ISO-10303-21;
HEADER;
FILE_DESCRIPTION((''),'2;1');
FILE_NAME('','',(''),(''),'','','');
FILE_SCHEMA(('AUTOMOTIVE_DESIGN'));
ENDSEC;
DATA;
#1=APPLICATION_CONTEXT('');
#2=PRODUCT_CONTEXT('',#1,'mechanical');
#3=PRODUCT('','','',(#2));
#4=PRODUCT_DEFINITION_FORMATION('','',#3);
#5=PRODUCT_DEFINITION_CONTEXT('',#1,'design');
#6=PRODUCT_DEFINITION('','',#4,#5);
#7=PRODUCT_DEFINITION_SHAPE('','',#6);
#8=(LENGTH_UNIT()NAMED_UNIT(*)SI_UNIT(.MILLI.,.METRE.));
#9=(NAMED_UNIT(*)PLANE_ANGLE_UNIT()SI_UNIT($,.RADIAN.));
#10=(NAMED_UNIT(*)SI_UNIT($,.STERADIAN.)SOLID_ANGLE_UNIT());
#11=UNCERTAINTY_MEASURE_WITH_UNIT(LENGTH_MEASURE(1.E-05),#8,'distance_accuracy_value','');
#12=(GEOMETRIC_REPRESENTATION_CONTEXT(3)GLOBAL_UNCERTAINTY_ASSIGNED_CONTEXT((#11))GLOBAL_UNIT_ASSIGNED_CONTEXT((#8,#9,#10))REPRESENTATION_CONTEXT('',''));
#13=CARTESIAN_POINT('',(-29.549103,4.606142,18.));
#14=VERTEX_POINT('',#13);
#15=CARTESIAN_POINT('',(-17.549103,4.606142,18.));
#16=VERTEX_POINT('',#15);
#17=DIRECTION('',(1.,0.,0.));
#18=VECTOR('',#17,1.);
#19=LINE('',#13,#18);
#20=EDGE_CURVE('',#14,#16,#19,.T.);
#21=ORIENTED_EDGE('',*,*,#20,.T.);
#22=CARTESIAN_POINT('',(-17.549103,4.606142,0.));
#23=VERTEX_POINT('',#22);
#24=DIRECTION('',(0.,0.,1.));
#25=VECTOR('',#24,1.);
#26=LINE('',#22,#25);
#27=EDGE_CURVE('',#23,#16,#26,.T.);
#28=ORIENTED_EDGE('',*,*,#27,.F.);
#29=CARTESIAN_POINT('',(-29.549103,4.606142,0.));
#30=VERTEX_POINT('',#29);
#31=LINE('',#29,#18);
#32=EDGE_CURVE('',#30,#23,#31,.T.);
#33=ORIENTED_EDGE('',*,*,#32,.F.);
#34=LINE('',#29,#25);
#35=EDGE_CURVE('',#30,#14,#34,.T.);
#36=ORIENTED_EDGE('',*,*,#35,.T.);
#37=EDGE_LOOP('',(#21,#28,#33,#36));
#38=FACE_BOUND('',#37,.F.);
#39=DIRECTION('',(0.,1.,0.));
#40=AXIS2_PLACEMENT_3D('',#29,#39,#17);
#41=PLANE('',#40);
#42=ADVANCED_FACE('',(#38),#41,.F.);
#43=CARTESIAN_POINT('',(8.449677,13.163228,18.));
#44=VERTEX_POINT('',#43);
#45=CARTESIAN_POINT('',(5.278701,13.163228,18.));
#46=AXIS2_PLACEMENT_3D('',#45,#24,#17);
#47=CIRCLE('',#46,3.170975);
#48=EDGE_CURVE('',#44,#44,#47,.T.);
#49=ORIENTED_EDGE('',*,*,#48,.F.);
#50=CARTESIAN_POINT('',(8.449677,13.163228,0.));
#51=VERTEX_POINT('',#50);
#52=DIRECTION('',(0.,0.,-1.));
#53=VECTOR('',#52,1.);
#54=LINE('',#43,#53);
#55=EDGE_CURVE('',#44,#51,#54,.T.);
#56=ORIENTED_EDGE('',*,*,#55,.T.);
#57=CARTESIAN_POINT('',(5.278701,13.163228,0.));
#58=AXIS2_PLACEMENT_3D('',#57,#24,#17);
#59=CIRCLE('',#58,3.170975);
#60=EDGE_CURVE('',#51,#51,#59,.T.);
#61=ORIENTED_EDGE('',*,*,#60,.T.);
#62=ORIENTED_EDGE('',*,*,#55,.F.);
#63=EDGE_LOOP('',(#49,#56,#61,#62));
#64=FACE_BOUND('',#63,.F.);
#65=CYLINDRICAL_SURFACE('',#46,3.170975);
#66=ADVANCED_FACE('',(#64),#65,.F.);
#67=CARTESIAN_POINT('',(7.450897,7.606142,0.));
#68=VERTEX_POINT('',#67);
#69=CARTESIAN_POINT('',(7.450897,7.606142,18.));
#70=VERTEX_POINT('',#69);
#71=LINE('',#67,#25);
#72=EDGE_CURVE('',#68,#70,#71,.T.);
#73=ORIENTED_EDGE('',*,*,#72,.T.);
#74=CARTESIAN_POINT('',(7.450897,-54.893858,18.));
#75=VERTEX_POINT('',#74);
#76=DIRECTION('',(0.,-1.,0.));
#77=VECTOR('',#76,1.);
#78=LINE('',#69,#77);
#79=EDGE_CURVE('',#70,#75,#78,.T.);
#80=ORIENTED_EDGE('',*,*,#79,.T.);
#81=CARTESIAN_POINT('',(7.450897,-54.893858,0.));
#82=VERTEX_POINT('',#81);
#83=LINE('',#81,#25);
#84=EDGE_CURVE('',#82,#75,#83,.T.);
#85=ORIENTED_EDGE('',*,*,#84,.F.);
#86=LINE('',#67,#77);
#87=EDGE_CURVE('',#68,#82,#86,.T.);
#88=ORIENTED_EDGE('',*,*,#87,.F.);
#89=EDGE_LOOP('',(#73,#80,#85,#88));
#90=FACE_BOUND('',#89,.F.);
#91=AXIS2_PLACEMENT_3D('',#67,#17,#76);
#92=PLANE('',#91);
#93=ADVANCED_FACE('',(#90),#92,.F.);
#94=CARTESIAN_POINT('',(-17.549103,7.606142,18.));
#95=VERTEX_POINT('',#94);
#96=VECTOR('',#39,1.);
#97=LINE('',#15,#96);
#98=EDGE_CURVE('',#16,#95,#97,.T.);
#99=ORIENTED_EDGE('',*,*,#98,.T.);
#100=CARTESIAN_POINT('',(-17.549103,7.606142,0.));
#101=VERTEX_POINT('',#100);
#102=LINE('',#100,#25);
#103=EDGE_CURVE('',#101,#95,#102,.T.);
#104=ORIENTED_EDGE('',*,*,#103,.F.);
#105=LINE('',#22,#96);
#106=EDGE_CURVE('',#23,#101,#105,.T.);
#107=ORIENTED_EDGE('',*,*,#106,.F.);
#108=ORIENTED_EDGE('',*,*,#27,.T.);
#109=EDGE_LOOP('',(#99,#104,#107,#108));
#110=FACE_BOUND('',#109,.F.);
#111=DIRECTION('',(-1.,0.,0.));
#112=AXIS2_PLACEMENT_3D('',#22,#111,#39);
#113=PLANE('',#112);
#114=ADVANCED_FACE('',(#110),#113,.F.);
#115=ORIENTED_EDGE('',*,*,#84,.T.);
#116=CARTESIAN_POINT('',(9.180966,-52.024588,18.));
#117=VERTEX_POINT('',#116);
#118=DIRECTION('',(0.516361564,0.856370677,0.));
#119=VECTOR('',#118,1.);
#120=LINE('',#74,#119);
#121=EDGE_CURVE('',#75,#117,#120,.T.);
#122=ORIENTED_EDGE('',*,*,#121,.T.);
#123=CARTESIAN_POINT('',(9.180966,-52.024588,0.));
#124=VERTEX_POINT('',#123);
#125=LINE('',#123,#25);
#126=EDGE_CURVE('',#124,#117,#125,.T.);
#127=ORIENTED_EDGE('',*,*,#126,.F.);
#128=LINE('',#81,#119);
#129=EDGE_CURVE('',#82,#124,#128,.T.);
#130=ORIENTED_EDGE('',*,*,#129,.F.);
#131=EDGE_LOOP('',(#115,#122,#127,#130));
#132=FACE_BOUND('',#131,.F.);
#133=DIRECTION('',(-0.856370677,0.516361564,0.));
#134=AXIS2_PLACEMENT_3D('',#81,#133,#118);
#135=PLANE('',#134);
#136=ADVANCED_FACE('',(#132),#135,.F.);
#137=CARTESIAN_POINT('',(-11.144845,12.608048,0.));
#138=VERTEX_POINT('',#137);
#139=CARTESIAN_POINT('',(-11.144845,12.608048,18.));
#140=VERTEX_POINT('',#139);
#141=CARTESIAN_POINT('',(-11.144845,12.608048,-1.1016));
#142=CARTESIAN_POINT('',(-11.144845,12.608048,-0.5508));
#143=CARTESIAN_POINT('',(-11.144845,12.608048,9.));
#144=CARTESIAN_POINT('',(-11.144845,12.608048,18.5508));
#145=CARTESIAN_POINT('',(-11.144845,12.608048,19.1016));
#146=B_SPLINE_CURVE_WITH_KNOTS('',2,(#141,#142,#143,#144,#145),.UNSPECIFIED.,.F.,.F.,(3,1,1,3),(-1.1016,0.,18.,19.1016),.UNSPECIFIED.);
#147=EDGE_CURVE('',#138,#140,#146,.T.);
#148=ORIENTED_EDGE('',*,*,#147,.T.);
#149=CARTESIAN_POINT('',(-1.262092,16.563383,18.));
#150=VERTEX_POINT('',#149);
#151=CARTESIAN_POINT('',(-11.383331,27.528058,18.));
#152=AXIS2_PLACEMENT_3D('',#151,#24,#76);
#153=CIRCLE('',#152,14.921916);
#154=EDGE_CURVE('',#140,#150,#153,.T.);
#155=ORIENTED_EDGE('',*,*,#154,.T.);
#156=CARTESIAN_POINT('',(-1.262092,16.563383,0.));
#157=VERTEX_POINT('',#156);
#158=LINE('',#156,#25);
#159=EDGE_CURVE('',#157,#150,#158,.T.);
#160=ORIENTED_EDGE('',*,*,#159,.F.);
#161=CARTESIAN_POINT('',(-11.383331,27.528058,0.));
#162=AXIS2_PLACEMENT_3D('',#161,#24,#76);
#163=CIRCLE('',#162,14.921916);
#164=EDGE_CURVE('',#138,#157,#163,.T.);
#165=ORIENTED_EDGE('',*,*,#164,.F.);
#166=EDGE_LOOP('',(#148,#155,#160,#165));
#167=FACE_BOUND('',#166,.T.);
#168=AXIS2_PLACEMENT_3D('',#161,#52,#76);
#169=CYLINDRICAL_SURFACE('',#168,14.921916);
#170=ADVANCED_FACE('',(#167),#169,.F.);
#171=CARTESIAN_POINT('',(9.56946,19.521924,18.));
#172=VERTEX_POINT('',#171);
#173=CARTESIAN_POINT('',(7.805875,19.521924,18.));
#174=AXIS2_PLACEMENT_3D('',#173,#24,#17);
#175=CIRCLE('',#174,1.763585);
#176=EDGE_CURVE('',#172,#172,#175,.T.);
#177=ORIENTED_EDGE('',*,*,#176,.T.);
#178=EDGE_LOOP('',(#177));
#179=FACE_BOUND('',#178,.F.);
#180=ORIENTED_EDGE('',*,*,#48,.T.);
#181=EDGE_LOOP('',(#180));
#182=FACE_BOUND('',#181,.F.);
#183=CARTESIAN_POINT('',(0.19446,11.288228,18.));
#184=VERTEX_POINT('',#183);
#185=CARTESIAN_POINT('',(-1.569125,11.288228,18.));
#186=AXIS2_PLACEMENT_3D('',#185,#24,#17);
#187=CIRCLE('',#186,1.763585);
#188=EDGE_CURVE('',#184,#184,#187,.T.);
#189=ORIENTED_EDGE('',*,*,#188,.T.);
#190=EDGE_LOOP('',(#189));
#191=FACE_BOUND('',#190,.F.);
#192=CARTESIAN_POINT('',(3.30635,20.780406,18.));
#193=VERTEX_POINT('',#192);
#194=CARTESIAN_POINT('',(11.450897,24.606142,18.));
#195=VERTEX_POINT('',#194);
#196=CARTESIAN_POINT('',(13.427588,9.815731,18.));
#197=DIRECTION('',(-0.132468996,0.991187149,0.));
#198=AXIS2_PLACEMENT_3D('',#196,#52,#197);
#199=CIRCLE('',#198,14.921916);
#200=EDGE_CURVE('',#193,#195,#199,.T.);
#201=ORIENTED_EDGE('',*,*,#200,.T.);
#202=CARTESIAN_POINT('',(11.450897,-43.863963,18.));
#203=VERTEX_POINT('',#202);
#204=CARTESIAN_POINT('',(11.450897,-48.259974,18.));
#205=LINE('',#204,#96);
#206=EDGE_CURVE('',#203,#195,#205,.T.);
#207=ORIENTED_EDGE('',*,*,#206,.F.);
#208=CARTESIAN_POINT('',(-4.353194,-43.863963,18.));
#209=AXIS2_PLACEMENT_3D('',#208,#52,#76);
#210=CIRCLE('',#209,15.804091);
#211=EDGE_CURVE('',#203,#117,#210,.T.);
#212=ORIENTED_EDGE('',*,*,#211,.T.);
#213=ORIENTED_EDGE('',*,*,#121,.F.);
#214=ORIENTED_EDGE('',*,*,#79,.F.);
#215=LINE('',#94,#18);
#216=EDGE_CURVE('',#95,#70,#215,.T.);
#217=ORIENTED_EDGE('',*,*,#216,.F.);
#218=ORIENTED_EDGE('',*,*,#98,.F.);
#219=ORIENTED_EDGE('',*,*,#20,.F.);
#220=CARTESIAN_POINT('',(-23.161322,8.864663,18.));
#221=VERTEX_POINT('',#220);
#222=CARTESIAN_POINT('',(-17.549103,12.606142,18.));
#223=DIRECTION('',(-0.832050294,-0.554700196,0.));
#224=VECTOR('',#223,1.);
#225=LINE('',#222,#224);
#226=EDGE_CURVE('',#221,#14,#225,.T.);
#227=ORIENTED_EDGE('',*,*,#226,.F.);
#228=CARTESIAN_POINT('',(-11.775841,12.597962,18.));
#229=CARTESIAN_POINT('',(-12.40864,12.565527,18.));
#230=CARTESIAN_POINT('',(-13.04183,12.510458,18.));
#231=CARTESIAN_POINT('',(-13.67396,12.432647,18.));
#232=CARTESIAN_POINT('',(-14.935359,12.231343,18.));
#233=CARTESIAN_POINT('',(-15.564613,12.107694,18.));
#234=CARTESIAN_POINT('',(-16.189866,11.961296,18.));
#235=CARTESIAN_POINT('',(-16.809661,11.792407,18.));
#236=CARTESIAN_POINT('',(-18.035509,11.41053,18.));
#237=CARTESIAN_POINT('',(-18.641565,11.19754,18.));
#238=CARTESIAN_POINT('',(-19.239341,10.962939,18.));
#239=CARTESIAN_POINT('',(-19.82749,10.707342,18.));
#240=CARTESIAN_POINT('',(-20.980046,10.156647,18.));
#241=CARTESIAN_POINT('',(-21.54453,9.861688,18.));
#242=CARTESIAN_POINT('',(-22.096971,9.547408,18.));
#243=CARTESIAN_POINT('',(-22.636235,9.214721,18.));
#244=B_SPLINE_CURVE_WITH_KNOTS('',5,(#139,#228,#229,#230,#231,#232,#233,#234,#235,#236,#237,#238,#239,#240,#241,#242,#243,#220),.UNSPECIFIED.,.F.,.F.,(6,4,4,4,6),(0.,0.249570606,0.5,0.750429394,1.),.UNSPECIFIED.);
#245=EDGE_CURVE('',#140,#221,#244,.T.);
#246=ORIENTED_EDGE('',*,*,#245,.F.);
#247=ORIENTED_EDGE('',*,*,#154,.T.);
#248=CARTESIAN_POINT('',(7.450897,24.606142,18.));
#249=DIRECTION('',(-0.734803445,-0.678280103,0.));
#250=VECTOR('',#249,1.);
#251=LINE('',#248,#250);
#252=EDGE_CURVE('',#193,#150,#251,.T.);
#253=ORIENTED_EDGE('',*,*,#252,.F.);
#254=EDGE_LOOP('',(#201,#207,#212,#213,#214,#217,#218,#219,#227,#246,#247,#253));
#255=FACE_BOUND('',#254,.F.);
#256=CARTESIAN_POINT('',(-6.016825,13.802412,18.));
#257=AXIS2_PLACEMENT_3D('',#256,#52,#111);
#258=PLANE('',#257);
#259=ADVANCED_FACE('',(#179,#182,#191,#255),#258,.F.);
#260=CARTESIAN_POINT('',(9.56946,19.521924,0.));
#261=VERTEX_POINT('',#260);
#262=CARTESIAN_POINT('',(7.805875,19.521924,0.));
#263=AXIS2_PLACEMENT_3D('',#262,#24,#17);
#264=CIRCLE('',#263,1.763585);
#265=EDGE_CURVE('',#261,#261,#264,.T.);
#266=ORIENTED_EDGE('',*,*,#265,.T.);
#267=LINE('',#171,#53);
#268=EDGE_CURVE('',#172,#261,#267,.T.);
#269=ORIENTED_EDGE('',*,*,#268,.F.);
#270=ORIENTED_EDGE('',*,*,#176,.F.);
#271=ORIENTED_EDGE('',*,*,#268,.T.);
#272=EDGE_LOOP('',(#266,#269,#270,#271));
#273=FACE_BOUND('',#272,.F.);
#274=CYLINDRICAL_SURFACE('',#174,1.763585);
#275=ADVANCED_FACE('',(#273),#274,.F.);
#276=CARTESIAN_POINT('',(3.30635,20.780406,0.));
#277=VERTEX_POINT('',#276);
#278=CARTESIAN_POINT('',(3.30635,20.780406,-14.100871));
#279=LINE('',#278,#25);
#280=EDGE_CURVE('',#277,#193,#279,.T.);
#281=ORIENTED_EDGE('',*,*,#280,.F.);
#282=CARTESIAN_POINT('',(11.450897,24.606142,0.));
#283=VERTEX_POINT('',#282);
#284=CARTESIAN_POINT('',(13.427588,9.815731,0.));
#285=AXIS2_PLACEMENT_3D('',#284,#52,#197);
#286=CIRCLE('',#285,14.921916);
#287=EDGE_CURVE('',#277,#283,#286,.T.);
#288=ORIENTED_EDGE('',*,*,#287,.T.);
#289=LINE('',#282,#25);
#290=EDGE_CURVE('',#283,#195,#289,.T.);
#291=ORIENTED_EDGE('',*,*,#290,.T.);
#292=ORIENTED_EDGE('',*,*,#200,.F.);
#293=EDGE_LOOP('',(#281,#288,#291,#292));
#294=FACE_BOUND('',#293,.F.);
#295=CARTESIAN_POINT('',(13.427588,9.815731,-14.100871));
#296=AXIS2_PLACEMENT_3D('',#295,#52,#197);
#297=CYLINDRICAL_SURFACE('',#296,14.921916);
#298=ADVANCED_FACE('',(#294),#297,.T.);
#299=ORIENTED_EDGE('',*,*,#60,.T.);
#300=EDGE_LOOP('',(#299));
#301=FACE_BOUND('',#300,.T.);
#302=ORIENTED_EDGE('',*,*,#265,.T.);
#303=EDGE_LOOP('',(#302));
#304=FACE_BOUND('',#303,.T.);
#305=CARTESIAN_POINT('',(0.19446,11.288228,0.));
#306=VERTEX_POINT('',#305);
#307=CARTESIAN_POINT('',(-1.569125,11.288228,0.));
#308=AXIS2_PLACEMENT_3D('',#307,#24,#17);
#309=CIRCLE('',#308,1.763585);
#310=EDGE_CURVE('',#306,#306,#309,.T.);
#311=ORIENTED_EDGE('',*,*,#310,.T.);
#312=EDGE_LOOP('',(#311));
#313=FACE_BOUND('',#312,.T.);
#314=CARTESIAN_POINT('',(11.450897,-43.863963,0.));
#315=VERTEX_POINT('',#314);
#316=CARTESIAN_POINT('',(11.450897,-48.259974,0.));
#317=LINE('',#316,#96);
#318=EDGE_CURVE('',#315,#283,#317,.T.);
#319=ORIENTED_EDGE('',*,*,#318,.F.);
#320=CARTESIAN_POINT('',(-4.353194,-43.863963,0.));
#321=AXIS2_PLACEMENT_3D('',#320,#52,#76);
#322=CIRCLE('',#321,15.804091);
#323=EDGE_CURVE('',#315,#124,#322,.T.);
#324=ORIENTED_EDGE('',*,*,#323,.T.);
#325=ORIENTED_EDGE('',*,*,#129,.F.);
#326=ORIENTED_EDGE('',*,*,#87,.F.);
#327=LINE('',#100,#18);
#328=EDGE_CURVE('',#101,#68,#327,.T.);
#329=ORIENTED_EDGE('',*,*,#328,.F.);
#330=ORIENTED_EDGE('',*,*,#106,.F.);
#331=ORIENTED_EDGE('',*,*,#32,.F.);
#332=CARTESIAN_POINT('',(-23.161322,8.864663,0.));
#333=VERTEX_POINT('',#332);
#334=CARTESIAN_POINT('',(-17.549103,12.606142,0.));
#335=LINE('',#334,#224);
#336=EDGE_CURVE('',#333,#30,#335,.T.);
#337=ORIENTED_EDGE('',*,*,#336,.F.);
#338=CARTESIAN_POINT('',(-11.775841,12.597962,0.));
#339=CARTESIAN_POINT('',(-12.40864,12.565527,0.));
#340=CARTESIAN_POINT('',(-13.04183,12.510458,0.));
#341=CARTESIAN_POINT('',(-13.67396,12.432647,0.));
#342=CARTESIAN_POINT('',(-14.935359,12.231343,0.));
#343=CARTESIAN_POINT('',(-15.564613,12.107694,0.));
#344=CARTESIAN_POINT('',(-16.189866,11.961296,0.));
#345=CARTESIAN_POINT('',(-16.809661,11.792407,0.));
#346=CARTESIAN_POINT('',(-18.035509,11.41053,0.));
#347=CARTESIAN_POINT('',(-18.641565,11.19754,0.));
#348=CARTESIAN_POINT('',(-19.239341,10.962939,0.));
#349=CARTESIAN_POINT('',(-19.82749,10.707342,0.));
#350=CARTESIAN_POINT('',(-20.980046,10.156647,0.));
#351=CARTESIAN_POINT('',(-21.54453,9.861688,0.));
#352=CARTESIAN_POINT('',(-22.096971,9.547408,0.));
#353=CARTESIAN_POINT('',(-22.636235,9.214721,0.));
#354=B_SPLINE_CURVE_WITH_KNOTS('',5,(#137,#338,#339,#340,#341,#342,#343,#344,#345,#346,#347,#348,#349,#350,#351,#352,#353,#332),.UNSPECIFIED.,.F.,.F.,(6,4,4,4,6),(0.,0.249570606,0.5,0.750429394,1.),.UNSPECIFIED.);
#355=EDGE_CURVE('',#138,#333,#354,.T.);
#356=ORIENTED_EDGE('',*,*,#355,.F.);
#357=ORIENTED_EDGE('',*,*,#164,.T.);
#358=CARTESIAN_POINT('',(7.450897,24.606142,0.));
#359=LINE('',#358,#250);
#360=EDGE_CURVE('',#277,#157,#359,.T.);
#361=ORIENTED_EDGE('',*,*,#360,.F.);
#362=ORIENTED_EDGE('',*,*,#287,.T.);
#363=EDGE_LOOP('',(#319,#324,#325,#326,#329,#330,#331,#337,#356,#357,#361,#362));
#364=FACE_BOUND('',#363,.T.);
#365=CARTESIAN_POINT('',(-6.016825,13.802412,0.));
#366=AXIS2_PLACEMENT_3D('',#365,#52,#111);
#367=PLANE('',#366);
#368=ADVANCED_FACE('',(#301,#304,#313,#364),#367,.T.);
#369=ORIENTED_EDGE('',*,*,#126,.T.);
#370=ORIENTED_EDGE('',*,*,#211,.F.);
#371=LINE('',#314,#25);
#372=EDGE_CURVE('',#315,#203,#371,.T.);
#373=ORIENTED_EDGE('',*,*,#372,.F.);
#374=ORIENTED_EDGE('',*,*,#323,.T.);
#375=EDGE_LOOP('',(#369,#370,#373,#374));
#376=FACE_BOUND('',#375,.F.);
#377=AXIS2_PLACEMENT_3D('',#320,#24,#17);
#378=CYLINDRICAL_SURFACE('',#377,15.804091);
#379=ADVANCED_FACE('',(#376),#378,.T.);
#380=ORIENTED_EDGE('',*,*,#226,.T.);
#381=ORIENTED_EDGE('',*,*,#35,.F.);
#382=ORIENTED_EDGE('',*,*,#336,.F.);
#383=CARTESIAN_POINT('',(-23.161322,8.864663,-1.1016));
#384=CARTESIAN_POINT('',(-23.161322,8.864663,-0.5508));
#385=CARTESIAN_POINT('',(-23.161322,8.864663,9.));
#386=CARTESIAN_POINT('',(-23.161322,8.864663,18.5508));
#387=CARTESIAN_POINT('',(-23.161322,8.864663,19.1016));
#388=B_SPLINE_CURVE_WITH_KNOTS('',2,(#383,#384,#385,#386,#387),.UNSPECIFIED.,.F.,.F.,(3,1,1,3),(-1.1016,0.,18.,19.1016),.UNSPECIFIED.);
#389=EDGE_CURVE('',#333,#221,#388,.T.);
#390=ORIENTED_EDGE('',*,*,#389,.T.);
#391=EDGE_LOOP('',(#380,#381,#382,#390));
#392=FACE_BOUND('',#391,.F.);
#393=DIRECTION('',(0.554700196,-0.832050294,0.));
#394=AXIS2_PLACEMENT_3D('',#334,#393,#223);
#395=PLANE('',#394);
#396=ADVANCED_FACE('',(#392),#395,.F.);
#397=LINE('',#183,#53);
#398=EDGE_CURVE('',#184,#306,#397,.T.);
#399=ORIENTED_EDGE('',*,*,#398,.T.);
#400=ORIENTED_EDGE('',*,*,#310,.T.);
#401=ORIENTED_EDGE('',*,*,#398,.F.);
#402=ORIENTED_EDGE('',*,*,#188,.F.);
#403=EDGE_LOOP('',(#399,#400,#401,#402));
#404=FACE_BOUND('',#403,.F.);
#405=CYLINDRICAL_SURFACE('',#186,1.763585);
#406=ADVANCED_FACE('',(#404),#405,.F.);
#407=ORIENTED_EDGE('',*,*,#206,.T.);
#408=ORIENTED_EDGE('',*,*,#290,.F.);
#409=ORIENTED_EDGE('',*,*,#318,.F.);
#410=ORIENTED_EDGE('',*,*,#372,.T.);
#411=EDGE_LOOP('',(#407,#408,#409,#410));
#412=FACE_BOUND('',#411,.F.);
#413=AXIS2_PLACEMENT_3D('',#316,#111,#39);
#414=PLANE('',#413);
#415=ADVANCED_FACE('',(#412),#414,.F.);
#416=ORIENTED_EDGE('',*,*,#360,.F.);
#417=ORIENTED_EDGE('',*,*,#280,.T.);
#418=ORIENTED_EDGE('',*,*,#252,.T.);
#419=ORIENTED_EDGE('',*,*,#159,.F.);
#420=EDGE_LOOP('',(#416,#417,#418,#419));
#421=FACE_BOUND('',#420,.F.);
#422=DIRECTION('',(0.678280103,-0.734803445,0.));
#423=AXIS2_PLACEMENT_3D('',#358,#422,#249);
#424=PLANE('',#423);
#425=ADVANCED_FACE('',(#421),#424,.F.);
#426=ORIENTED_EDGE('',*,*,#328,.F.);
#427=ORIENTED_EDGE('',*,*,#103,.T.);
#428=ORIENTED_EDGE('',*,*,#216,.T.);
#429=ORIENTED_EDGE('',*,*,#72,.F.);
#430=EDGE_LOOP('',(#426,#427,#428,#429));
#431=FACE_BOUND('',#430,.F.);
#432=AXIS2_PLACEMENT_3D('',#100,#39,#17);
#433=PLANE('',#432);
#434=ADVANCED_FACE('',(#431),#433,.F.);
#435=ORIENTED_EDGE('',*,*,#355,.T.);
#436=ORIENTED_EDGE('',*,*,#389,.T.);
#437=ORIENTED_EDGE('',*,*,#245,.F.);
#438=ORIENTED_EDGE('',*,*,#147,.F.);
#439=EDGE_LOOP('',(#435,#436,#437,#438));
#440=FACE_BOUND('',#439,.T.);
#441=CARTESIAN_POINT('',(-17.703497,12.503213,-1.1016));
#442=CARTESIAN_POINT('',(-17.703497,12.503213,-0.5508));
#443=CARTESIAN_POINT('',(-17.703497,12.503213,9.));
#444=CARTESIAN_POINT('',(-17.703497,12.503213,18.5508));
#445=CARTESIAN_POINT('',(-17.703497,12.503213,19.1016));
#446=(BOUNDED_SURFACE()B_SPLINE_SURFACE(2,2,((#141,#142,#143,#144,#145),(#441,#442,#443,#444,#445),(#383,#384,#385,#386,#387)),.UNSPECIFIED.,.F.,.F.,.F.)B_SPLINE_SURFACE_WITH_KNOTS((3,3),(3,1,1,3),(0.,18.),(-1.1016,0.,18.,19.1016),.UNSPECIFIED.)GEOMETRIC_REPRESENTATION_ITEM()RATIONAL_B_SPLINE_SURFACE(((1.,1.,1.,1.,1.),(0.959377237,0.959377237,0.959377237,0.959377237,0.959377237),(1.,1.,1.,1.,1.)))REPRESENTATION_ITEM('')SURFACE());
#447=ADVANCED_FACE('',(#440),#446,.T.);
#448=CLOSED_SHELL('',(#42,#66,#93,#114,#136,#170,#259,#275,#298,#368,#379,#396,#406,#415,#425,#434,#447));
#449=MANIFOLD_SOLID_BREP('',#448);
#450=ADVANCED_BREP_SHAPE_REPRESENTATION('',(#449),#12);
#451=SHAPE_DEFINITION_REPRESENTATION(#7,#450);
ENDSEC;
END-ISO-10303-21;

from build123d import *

# Parameters (mm, degrees)
F1_DEPTH    = 18
F2_T1_DEPTH = 18
F2_T3_DEPTH = 46.2017417965
F3_R        = 22.3056916506
F4_R        = 15.8040911287
F5_R        = 1.7635852265
F5_R_2      = 3.1709752344
F6_DEPTH    = 18


# Not quite as in the source:
# - a fillet or chamfer that OpenCascade refuses, or shapes differently, is made with other operations: its cross-section is extruded or revolved along the edge and cut away or added


with BuildPart() as f1:
    # F0 (on Top) → F1 (new body)
    with BuildSketch(Plane.XY):
        Polygon((-17.5491029148, 7.6061424899), (7.4508970852, 7.6061424899), (7.4508970852, -54.8938575101), (11.4508970852, -48.259973526), (11.4508970852, 24.6061424899), (7.4508970852, 24.6061424899), (-5.5491029148, 12.6061424899), (-17.5491029148, 12.6061424899), (-29.5491029148, 4.6061424899), (-17.5491029148, 4.6061424899), align=None)
    extrude(amount=F1_DEPTH)

    # F2: fillet of radius 14.9219158343 on 2 edges, made by hand

    # F2_s2 → F2_t1 (join)
    with BuildSketch(Plane.XY):
        with BuildLine():
            ThreePointArc((-11.3833307845, 12.6061424899), (-5.9496574254, 13.6306209347), (-1.2620921794, 16.5633831687))
            Line((-1.2620921794, 16.5633831687), (-5.5491029148, 12.6061424899))
            Line((-5.5491029148, 12.6061424899), (-11.3833307845, 12.6061424899))
        make_face()
    extrude(amount=F2_T1_DEPTH)

    # F2_s4 → F2_t3 (cut)
    with BuildSketch(Plane.XY.offset(-14.1008708982)):
        with BuildLine():
            ThreePointArc((11.4508970852, 24.6061424899), (7.0833751355, 23.32182366), (3.3063496819, 20.7804064253))
            Line((3.3063496819, 20.7804064253), (7.4508970852, 24.6061424899))
            Line((7.4508970852, 24.6061424899), (11.4508970852, 24.6061424899))
        make_face()
    extrude(amount=F2_T3_DEPTH, mode=Mode.SUBTRACT)

    # F3
    f3_edges = [f1.edges().sort_by_distance(p)[0] for p in [
        (-17.549103, 12.606142, 9),
    ]]
    fillet(f3_edges, radius=F3_R)

    # F4
    f4_edges = [f1.edges().sort_by_distance(p)[0] for p in [
        (11.450897, -48.259974, 9),
    ]]
    fillet(f4_edges, radius=F4_R)

    # F5 (on face) → F6 (cut)
    with BuildSketch(Plane.XY.offset(18)):
        with Locations((-1.5691251028, 11.2882275134)):
            Circle(F5_R)
        with Locations((5.2787014283, 13.1632275879)):
            Circle(F5_R_2)
        with Locations((7.8058750369, 19.5219237357)):
            Circle(F5_R)
    extrude(amount=-F6_DEPTH, mode=Mode.SUBTRACT)


solid = f1.part
